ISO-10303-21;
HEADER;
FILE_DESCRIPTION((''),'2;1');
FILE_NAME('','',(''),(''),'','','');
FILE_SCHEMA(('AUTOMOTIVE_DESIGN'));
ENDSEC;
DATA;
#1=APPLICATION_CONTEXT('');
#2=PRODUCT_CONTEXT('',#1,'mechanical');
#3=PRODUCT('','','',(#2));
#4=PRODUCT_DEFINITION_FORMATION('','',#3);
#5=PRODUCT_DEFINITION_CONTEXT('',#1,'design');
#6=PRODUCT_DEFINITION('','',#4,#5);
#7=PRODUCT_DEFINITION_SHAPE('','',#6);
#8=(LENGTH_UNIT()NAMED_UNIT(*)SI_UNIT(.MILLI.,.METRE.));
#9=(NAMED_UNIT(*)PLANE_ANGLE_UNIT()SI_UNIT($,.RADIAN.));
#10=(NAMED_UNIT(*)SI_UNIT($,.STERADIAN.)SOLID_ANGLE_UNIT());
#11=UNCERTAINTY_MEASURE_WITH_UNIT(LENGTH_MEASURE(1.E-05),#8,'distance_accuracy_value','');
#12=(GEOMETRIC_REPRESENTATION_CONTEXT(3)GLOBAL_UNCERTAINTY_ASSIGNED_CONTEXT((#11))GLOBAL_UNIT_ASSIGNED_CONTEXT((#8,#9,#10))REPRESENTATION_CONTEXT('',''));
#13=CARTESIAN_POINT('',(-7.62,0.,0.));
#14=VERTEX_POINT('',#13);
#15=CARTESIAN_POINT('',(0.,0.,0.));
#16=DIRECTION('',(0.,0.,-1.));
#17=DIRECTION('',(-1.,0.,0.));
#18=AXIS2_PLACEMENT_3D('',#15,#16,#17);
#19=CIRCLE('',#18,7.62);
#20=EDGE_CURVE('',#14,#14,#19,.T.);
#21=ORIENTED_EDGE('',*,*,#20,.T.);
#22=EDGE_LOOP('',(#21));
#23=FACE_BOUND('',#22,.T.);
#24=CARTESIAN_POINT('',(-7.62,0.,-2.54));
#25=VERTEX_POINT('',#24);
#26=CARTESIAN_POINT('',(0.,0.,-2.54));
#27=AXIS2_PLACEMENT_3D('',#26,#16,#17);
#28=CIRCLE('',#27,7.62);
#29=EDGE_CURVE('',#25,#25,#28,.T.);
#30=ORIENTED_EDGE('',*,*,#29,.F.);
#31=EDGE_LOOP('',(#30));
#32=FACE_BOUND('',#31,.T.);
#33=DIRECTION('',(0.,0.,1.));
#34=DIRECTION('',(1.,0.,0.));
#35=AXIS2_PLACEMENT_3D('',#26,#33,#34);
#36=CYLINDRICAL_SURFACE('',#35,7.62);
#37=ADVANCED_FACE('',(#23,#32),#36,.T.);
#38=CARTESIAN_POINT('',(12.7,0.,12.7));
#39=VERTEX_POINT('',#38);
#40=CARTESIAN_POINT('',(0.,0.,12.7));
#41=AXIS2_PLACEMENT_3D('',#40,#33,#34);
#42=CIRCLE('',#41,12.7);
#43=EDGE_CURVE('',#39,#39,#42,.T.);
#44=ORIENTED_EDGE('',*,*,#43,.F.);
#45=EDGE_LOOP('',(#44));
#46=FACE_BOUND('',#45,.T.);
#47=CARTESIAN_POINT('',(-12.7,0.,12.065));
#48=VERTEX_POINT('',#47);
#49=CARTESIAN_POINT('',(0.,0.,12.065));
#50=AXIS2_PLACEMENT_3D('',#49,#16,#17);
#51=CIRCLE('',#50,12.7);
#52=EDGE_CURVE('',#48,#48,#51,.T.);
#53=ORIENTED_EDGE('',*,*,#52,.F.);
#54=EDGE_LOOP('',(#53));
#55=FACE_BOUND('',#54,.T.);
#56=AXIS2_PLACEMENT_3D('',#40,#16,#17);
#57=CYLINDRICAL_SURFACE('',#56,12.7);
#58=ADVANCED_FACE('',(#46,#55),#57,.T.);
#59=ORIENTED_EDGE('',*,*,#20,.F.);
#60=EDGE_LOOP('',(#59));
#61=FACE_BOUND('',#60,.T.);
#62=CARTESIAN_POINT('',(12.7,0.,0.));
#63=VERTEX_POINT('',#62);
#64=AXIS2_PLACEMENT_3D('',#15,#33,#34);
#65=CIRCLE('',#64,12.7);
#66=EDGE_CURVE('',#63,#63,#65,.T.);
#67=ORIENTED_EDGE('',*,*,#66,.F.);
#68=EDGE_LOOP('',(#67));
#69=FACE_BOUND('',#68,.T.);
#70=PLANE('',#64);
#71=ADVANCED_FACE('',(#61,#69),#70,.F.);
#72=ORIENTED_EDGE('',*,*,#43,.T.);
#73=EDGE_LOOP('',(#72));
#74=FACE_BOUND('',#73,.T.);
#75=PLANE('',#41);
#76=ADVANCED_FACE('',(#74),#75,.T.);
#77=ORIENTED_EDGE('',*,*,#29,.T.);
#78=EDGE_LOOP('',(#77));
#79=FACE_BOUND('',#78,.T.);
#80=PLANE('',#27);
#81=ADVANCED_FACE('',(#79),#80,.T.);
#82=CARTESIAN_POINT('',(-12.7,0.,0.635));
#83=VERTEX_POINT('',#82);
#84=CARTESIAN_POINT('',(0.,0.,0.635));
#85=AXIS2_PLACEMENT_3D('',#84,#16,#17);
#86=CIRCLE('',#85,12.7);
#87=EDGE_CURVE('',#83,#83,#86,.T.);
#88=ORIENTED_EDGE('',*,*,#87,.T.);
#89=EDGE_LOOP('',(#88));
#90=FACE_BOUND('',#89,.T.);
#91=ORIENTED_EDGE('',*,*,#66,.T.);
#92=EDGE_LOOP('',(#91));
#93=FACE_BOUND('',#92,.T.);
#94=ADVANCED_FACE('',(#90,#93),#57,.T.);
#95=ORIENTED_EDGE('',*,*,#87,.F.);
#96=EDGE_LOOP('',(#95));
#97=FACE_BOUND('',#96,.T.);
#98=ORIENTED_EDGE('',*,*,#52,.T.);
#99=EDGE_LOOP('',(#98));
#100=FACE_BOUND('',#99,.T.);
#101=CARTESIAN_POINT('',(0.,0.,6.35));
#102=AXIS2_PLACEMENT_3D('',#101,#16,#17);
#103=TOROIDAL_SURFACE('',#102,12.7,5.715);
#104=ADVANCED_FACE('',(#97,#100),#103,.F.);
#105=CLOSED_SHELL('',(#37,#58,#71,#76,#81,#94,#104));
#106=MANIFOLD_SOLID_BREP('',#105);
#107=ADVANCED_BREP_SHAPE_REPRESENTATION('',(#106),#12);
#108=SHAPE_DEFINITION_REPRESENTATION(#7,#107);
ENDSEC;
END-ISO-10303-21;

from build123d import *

# Parameters (mm, degrees)
SKETCH1_R           = 12.7
BOSS_EXTRUDE1_DEPTH = 12.7
SKETCH4_R           = 7.62
BOSS_EXTRUDE2_DEPTH = 2.54


with BuildPart() as part:
    # Sketch1 → Boss-Extrude1 (new body)
    with BuildSketch(Plane.XY):
        Circle(SKETCH1_R)
    extrude(amount=BOSS_EXTRUDE1_DEPTH)

    # Sketch2 → Cut-Revolve1 (revolve, cut)
    with BuildSketch(Plane(origin=(0, 0, 0), x_dir=(0, 0, -1), z_dir=(1, 0, 0)), mode=Mode.PRIVATE) as cut_revolve1_sk:
        with BuildLine():
            Line((-12.065, 12.7), (-0.635, 12.7))
            ThreePointArc((-0.635, 12.7), (-6.35, 6.985), (-12.065, 12.7))
        make_face()
    revolve(cut_revolve1_sk.sketch.rotate(Axis((0, 0, 6.35), (0, 0, 1)), 90), axis=Axis((0, 0, 6.35), (0, 0, 1)), mode=Mode.SUBTRACT)

    # Sketch4 → Boss-Extrude2 (add)
    with BuildSketch(Plane(origin=(0, 0, 0), x_dir=(-1, 0, 0), z_dir=(0, 0, -1))):
        Circle(SKETCH4_R)
    extrude(amount=BOSS_EXTRUDE2_DEPTH)


solid = part.part
